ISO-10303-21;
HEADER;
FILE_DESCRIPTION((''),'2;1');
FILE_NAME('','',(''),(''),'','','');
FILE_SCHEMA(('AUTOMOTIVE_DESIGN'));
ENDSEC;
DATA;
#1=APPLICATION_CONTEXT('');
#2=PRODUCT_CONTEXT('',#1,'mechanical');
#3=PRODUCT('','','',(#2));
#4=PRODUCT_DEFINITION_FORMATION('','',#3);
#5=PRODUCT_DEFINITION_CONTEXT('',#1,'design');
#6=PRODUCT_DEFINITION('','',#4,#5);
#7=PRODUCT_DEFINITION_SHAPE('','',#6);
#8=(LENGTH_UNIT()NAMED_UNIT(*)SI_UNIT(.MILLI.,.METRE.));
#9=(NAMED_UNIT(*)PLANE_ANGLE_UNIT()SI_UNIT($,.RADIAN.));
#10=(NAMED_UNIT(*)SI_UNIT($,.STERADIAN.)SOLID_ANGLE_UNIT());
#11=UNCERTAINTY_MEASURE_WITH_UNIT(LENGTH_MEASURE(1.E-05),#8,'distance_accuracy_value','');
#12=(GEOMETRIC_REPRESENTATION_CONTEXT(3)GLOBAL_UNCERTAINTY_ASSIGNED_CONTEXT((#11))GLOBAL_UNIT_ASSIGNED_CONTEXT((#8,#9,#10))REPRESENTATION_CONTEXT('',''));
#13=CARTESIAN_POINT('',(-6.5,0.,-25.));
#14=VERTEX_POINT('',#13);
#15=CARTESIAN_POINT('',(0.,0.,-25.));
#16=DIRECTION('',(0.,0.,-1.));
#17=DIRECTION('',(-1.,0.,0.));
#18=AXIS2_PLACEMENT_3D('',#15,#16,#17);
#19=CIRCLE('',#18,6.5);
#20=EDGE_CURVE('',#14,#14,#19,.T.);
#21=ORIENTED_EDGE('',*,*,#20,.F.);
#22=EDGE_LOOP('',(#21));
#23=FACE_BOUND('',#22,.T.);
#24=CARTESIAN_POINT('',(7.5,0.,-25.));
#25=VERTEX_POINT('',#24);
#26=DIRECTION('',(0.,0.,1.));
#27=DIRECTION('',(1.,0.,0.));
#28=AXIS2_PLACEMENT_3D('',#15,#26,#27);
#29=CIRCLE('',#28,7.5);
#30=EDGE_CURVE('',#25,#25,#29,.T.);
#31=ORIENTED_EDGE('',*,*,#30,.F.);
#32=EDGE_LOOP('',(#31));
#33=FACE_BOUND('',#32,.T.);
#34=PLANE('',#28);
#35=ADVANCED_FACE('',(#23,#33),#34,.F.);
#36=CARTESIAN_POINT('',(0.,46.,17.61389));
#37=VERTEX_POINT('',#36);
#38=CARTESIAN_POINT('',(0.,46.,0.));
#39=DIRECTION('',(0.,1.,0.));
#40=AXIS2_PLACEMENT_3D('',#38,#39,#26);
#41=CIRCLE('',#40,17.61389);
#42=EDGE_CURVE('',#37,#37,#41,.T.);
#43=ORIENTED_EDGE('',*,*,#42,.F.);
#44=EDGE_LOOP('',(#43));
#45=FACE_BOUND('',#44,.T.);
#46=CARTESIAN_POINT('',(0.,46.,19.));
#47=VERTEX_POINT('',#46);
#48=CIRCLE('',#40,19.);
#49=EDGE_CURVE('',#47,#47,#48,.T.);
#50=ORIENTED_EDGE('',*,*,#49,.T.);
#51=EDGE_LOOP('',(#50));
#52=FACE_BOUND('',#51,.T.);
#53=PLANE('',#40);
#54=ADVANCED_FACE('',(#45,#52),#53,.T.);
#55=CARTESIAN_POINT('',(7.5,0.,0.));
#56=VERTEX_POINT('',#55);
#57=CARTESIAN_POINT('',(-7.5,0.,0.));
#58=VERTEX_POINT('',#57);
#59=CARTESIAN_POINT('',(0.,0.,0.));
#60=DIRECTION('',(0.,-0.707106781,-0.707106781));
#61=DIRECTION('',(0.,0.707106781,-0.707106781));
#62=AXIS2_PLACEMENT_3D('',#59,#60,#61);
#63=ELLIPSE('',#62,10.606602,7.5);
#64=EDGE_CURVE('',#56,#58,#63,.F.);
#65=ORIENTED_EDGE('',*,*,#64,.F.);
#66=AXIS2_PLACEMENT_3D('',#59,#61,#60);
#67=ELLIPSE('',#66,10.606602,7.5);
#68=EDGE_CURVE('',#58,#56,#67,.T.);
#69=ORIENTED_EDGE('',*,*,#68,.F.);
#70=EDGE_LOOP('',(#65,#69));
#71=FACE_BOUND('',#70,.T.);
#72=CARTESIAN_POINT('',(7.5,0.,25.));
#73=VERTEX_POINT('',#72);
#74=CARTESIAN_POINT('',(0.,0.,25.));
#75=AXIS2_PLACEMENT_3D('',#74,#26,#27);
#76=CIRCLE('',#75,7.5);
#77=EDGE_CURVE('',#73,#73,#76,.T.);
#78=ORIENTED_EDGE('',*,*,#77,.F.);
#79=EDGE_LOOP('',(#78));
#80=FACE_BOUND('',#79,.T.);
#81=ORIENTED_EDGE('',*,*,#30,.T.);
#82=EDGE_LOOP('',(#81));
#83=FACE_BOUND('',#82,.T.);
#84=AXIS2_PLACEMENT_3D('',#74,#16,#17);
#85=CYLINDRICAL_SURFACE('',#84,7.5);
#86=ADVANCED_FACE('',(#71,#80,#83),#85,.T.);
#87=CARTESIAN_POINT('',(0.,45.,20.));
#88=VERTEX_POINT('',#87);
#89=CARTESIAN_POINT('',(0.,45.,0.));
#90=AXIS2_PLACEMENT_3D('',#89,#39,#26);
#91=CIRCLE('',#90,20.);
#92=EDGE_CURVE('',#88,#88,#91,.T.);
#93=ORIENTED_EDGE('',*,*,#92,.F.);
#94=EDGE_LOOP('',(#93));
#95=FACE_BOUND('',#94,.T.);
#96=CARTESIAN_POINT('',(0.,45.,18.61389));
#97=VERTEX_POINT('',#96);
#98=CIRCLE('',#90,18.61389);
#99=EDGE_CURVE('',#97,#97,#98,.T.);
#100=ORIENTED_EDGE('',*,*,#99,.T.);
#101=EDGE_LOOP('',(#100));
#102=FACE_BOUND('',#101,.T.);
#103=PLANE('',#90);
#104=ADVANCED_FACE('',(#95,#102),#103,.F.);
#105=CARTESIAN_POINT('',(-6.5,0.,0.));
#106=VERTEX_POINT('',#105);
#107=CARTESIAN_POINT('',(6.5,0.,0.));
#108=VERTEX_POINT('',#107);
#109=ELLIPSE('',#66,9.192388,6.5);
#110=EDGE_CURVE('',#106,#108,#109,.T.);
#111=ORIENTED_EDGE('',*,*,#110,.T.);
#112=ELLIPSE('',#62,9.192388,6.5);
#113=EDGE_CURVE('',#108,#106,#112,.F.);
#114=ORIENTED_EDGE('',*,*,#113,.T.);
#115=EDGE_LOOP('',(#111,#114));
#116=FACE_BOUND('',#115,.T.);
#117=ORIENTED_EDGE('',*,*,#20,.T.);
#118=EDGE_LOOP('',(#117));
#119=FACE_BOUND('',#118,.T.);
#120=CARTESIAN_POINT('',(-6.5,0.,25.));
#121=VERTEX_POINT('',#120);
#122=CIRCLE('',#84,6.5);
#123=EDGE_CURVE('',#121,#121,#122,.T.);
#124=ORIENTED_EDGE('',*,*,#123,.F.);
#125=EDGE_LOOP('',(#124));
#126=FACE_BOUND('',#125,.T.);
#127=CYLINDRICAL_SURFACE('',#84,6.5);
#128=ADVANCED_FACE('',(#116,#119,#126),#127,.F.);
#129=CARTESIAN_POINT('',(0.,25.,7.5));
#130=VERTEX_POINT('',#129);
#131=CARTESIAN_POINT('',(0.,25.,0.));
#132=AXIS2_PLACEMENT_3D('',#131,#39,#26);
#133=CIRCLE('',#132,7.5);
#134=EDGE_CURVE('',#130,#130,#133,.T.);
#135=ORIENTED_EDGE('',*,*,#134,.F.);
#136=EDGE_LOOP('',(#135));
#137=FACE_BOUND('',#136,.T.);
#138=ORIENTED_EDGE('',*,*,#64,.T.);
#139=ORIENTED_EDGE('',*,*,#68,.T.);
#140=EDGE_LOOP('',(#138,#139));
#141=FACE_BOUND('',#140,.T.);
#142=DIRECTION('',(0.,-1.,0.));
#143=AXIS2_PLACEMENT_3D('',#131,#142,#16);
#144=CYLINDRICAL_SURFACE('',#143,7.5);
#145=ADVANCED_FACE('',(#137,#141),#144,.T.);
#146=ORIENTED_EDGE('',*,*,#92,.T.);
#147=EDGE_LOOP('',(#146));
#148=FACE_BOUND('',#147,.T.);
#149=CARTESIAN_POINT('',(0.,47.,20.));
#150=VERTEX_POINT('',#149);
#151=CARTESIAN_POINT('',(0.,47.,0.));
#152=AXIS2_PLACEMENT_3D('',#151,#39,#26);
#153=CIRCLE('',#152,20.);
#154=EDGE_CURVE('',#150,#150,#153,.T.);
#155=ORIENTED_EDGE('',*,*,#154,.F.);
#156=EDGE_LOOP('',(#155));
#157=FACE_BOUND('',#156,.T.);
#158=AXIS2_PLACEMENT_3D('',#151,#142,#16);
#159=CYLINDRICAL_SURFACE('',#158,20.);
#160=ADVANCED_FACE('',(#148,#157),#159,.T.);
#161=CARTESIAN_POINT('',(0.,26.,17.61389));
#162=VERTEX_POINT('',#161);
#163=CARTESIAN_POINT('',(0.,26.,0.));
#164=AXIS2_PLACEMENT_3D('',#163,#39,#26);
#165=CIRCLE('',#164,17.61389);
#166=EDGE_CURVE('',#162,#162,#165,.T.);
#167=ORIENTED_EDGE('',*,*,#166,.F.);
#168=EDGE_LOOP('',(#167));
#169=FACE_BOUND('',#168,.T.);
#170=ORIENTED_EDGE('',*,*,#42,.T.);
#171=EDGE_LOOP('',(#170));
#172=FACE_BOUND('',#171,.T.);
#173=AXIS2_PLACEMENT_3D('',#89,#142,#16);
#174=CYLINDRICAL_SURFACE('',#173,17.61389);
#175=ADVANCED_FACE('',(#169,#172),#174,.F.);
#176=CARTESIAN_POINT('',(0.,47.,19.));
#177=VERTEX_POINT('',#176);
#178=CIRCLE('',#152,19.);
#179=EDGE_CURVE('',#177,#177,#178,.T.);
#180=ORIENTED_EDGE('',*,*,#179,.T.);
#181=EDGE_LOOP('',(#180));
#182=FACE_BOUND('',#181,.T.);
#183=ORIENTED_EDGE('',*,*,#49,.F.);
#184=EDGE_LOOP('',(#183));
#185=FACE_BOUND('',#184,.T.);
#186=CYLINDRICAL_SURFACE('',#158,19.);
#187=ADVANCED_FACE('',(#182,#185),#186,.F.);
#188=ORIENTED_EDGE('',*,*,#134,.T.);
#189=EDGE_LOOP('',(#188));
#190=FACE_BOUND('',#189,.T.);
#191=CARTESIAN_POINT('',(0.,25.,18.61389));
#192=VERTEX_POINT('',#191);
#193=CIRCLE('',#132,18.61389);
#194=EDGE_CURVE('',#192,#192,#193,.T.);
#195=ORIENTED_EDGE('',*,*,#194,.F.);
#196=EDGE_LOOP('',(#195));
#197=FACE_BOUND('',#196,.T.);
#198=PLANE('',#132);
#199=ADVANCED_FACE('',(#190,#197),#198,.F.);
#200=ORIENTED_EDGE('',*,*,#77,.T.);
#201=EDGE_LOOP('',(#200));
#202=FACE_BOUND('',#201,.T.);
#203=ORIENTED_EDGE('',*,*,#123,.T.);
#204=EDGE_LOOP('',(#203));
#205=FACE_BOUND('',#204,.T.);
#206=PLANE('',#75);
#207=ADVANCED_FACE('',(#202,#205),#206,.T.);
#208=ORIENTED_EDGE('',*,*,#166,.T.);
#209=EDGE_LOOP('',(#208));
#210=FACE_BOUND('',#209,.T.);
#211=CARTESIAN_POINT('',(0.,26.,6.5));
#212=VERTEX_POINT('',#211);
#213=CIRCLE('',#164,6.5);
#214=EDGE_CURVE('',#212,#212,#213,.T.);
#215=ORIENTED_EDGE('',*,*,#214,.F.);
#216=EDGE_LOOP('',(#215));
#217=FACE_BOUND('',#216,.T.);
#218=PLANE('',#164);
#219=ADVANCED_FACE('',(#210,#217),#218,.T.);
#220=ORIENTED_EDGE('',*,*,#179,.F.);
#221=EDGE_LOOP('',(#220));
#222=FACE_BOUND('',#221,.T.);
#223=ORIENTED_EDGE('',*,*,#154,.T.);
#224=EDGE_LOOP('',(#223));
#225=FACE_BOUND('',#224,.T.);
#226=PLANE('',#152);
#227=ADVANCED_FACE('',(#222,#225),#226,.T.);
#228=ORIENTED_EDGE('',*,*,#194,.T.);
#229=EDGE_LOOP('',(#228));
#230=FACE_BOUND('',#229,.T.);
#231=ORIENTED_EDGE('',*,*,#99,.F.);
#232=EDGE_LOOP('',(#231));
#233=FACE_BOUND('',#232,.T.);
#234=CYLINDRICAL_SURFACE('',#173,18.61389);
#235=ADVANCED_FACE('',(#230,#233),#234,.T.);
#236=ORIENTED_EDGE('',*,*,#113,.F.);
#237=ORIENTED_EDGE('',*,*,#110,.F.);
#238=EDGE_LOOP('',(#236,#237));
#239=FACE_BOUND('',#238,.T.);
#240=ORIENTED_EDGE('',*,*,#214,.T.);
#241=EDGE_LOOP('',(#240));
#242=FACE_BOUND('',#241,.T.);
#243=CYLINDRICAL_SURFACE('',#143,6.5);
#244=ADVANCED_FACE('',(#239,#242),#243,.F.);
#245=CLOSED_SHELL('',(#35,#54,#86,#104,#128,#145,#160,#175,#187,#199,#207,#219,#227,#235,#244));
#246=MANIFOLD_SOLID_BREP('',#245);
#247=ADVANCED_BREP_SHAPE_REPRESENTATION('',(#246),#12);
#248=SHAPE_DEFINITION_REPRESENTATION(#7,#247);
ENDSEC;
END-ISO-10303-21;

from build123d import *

# Parameters (mm, degrees)
SZKIC1_R                    = 7.5
DODANIE_WYCI_GNI_CIE1_DEPTH = 25
SZKIC3_R                    = 7.5
DODANIE_WYCI_GNI_CIE2_DEPTH = 25
SZKIC4_R                    = 18.61388964
DODANIE_WYCI_GNI_CIE3_DEPTH = 20
SZKIC5_R                    = 20
DODANIE_WYCI_GNI_CIE4_DEPTH = 2
SKORUPA1_START              = 26
SKORUPA1_OUTLINE_R          = 17.61388964
SKORUPA1_DEPTH              = 21
SKORUPA1_START_2            = -1e-07
SKORUPA1_2_OUTLINE_R        = 6.5
SKORUPA1_2_DEPTH            = 26.0000001
SKORUPA1_START_3            = 46
SKORUPA1_3_OUTLINE_R        = 19
SKORUPA1_3_OUTLINE_R_2      = 17.61388964
SKORUPA1_3_DEPTH            = 1
SKORUPA1_START_4            = -24
SKORUPA1_4_OUTLINE_R        = 6.5
SKORUPA1_4_DEPTH            = 48
SZKIC6_R                    = 6.5
WYTNIJ_WYCI_GNI_CIE1_DEPTH  = 72.477269114


with BuildPart() as part:
    # Szkic1 → Dodanie-wyciągnięcie1 (new, symmetric)
    with BuildSketch(Plane.XY):
        Circle(SZKIC1_R)
    extrude(amount=DODANIE_WYCI_GNI_CIE1_DEPTH, both=True)

    # Szkic3 → Dodanie-wyciągnięcie2 (add)
    with BuildSketch(Plane(origin=(0, 0, 0), x_dir=(1, 0, 0), z_dir=(0, 1, 0))):
        Circle(SZKIC3_R)
    extrude(amount=DODANIE_WYCI_GNI_CIE2_DEPTH)

    # Szkic4 → Dodanie-wyciągnięcie3 (add)
    with BuildSketch(Plane(origin=(0, 25, 0), x_dir=(1, 0, 0), z_dir=(0, 1, 0))):
        with Locations(Location((0, 0, 0), (0, 0, 270))):
            Circle(SZKIC4_R)
    extrude(amount=DODANIE_WYCI_GNI_CIE3_DEPTH)

    # Szkic5 → Dodanie-wyciągnięcie4 (add)
    with BuildSketch(Plane(origin=(0, 45, 0), x_dir=(1, 0, 0), z_dir=(0, 1, 0))):
        with Locations(Location((0, 0, 0), (0, 0, 270))):
            Circle(SZKIC5_R)
    extrude(amount=DODANIE_WYCI_GNI_CIE4_DEPTH)

    # Skorupa1: read off the stored shape, not the designer's step
    # Skorupa1 outline → Skorupa1 (cut)
    with BuildSketch(Plane(origin=(0, 0, 0), x_dir=(1, 0, 0), z_dir=(0, 1, 0)).offset(SKORUPA1_START)):
        Circle(SKORUPA1_OUTLINE_R)
    extrude(amount=SKORUPA1_DEPTH, mode=Mode.SUBTRACT)

    # Skorupa1 2 outline → Skorupa1 2 (cut)
    with BuildSketch(Plane(origin=(0, 0, 0), x_dir=(1, 0, 0), z_dir=(0, 1, 0)).offset(SKORUPA1_START_2)):
        Circle(SKORUPA1_2_OUTLINE_R)
    extrude(amount=SKORUPA1_2_DEPTH, mode=Mode.SUBTRACT)

    # Skorupa1 3 outline → Skorupa1 3 (cut)
    with BuildSketch(Plane(origin=(0, 0, 0), x_dir=(1, 0, 0), z_dir=(0, 1, 0)).offset(SKORUPA1_START_3)):
        Circle(SKORUPA1_3_OUTLINE_R)
        Circle(SKORUPA1_3_OUTLINE_R_2, mode=Mode.SUBTRACT)
    extrude(amount=SKORUPA1_3_DEPTH, mode=Mode.SUBTRACT)

    # Skorupa1 4 outline → Skorupa1 4 (cut)
    with BuildSketch(Plane.XY.offset(SKORUPA1_START_4)):
        Circle(SKORUPA1_4_OUTLINE_R)
    extrude(amount=SKORUPA1_4_DEPTH, mode=Mode.SUBTRACT)

    # Szkic6 → Wytnij-wyciągnięcie1 (cut, through all)
    with BuildSketch(Plane(origin=(0, 0, -25), x_dir=(-1, 0, 0), z_dir=(0, 0, -1))):
        Circle(SZKIC6_R)
    extrude(amount=-WYTNIJ_WYCI_GNI_CIE1_DEPTH, mode=Mode.SUBTRACT)


solid = part.part
